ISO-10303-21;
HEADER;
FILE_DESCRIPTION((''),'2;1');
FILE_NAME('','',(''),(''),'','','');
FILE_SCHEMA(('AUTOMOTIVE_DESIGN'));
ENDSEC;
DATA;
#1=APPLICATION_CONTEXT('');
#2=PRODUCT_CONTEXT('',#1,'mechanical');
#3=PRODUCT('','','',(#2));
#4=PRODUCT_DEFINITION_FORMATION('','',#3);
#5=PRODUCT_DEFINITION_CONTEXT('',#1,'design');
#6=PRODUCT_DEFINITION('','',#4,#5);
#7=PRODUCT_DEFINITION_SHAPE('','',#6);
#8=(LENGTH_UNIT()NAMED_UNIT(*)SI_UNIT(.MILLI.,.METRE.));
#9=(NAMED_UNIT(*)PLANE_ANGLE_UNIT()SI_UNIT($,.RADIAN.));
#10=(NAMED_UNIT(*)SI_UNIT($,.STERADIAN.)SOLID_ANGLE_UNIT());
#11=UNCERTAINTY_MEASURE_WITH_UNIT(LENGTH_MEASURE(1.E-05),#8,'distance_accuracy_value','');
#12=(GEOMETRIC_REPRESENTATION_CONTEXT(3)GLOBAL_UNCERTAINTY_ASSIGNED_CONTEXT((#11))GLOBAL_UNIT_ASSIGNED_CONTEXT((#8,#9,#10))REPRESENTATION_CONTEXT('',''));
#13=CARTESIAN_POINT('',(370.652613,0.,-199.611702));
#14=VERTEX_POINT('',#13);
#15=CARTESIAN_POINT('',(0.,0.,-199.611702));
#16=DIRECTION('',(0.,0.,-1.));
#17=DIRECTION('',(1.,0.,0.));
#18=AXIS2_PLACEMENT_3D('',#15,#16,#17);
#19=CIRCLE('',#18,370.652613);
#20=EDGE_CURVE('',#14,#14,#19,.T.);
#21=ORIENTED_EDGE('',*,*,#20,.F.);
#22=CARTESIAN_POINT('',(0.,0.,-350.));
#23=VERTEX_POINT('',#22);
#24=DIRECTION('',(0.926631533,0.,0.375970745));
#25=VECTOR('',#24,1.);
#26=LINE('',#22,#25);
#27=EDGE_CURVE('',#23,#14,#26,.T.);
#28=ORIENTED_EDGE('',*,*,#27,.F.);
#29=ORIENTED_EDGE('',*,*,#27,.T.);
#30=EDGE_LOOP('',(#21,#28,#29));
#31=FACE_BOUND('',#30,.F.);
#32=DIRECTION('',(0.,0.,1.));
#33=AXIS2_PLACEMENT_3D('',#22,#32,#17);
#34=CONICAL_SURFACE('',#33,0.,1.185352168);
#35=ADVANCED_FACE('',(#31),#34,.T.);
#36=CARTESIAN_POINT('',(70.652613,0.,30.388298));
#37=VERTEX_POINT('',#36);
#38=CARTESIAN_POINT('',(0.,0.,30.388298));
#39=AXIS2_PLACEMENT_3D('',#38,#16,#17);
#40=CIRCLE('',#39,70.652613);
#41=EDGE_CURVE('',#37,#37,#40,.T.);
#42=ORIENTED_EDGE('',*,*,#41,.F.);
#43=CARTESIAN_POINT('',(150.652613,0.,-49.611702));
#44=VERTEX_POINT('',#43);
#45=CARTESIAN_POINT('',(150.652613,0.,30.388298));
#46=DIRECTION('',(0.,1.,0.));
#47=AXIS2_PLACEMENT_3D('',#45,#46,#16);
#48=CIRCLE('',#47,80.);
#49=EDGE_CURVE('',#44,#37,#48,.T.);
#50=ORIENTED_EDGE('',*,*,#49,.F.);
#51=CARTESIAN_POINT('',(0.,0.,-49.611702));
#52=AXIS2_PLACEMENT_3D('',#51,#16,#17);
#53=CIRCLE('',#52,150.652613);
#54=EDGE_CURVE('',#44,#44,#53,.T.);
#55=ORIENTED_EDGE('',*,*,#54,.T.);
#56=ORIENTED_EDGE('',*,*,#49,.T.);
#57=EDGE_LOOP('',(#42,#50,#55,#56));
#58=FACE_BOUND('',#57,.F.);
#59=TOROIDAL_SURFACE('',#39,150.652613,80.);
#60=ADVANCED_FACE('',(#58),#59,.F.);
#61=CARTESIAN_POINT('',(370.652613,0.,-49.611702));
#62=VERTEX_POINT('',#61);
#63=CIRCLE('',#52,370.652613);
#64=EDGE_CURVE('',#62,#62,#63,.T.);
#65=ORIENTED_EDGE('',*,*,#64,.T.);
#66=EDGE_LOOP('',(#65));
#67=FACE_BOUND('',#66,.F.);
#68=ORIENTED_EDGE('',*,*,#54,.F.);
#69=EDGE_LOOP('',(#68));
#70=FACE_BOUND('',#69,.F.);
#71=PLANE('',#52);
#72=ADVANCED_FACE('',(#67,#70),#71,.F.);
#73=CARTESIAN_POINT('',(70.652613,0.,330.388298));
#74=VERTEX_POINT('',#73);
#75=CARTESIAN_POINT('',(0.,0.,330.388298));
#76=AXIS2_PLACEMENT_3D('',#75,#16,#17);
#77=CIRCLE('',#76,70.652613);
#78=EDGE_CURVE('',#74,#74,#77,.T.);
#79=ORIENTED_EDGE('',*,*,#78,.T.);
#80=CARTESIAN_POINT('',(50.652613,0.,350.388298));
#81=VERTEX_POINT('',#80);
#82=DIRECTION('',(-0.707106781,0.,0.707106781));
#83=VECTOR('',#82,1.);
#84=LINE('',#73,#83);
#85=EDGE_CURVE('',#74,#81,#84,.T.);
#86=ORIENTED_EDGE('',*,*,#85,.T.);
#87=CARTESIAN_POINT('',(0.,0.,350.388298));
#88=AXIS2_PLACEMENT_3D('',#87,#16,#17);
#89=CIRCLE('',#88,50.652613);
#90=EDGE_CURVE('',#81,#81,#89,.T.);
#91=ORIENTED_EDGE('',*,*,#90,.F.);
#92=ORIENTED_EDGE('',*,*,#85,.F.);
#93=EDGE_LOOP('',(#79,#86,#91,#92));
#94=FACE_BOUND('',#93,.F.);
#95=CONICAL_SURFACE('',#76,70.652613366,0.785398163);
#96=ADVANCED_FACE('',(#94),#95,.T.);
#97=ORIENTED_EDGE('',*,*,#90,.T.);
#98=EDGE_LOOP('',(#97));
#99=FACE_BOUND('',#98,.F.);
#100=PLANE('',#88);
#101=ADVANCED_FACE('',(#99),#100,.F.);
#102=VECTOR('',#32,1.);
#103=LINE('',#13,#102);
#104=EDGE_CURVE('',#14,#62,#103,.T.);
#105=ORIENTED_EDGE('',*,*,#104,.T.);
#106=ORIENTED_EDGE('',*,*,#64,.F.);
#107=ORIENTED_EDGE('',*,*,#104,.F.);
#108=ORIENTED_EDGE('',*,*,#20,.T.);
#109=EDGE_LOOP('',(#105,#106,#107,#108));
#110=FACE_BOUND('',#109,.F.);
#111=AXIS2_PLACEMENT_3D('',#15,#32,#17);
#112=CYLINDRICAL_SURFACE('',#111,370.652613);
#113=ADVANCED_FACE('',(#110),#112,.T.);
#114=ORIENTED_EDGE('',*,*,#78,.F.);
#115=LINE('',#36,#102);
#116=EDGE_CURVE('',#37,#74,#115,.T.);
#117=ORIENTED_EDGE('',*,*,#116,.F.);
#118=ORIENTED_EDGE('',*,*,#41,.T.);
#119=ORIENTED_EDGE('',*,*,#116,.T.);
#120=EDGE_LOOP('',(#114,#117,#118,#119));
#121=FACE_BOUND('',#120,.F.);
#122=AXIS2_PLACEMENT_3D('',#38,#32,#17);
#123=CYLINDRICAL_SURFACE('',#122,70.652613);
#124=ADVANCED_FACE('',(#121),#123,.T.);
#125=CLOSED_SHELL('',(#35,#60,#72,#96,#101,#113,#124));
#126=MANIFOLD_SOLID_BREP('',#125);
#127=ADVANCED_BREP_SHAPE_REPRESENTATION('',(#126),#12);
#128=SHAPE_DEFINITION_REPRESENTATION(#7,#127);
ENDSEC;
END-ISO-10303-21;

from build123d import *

# Parameters (mm, degrees)
F2_SIZE = 20


with BuildPart() as f1:
    # F0 (on Front) → F1 (revolve)
    with BuildSketch(Plane.XZ):
        with BuildLine():
            Line((0, 350.3882980986), (0, -350))
            Line((0, -350), (370.6526133659, -199.6117019014))
            Line((370.6526133659, -199.6117019014), (370.6526133659, -49.6117019014))
            Line((370.6526133659, -49.6117019014), (150.6526133659, -49.6117019014))
            ThreePointArc((150.6526133659, -49.6117019014), (94.084070871, -26.1802443963), (70.6526133659, 30.3882980986))
            Line((70.6526133659, 30.3882980986), (70.6526133659, 350.3882980986))
            Line((70.6526133659, 350.3882980986), (0, 350.3882980986))
        make_face()
    revolve(axis=Axis((0, 0, 0.1941490493), (0, 0, -1)))

    # F2
    f2_edges = [f1.edges().sort_by_distance(p)[0] for p in [
        (-70.652613, 0, 350.388298),
    ]]
    chamfer(f2_edges, length=F2_SIZE)


solid = f1.part
